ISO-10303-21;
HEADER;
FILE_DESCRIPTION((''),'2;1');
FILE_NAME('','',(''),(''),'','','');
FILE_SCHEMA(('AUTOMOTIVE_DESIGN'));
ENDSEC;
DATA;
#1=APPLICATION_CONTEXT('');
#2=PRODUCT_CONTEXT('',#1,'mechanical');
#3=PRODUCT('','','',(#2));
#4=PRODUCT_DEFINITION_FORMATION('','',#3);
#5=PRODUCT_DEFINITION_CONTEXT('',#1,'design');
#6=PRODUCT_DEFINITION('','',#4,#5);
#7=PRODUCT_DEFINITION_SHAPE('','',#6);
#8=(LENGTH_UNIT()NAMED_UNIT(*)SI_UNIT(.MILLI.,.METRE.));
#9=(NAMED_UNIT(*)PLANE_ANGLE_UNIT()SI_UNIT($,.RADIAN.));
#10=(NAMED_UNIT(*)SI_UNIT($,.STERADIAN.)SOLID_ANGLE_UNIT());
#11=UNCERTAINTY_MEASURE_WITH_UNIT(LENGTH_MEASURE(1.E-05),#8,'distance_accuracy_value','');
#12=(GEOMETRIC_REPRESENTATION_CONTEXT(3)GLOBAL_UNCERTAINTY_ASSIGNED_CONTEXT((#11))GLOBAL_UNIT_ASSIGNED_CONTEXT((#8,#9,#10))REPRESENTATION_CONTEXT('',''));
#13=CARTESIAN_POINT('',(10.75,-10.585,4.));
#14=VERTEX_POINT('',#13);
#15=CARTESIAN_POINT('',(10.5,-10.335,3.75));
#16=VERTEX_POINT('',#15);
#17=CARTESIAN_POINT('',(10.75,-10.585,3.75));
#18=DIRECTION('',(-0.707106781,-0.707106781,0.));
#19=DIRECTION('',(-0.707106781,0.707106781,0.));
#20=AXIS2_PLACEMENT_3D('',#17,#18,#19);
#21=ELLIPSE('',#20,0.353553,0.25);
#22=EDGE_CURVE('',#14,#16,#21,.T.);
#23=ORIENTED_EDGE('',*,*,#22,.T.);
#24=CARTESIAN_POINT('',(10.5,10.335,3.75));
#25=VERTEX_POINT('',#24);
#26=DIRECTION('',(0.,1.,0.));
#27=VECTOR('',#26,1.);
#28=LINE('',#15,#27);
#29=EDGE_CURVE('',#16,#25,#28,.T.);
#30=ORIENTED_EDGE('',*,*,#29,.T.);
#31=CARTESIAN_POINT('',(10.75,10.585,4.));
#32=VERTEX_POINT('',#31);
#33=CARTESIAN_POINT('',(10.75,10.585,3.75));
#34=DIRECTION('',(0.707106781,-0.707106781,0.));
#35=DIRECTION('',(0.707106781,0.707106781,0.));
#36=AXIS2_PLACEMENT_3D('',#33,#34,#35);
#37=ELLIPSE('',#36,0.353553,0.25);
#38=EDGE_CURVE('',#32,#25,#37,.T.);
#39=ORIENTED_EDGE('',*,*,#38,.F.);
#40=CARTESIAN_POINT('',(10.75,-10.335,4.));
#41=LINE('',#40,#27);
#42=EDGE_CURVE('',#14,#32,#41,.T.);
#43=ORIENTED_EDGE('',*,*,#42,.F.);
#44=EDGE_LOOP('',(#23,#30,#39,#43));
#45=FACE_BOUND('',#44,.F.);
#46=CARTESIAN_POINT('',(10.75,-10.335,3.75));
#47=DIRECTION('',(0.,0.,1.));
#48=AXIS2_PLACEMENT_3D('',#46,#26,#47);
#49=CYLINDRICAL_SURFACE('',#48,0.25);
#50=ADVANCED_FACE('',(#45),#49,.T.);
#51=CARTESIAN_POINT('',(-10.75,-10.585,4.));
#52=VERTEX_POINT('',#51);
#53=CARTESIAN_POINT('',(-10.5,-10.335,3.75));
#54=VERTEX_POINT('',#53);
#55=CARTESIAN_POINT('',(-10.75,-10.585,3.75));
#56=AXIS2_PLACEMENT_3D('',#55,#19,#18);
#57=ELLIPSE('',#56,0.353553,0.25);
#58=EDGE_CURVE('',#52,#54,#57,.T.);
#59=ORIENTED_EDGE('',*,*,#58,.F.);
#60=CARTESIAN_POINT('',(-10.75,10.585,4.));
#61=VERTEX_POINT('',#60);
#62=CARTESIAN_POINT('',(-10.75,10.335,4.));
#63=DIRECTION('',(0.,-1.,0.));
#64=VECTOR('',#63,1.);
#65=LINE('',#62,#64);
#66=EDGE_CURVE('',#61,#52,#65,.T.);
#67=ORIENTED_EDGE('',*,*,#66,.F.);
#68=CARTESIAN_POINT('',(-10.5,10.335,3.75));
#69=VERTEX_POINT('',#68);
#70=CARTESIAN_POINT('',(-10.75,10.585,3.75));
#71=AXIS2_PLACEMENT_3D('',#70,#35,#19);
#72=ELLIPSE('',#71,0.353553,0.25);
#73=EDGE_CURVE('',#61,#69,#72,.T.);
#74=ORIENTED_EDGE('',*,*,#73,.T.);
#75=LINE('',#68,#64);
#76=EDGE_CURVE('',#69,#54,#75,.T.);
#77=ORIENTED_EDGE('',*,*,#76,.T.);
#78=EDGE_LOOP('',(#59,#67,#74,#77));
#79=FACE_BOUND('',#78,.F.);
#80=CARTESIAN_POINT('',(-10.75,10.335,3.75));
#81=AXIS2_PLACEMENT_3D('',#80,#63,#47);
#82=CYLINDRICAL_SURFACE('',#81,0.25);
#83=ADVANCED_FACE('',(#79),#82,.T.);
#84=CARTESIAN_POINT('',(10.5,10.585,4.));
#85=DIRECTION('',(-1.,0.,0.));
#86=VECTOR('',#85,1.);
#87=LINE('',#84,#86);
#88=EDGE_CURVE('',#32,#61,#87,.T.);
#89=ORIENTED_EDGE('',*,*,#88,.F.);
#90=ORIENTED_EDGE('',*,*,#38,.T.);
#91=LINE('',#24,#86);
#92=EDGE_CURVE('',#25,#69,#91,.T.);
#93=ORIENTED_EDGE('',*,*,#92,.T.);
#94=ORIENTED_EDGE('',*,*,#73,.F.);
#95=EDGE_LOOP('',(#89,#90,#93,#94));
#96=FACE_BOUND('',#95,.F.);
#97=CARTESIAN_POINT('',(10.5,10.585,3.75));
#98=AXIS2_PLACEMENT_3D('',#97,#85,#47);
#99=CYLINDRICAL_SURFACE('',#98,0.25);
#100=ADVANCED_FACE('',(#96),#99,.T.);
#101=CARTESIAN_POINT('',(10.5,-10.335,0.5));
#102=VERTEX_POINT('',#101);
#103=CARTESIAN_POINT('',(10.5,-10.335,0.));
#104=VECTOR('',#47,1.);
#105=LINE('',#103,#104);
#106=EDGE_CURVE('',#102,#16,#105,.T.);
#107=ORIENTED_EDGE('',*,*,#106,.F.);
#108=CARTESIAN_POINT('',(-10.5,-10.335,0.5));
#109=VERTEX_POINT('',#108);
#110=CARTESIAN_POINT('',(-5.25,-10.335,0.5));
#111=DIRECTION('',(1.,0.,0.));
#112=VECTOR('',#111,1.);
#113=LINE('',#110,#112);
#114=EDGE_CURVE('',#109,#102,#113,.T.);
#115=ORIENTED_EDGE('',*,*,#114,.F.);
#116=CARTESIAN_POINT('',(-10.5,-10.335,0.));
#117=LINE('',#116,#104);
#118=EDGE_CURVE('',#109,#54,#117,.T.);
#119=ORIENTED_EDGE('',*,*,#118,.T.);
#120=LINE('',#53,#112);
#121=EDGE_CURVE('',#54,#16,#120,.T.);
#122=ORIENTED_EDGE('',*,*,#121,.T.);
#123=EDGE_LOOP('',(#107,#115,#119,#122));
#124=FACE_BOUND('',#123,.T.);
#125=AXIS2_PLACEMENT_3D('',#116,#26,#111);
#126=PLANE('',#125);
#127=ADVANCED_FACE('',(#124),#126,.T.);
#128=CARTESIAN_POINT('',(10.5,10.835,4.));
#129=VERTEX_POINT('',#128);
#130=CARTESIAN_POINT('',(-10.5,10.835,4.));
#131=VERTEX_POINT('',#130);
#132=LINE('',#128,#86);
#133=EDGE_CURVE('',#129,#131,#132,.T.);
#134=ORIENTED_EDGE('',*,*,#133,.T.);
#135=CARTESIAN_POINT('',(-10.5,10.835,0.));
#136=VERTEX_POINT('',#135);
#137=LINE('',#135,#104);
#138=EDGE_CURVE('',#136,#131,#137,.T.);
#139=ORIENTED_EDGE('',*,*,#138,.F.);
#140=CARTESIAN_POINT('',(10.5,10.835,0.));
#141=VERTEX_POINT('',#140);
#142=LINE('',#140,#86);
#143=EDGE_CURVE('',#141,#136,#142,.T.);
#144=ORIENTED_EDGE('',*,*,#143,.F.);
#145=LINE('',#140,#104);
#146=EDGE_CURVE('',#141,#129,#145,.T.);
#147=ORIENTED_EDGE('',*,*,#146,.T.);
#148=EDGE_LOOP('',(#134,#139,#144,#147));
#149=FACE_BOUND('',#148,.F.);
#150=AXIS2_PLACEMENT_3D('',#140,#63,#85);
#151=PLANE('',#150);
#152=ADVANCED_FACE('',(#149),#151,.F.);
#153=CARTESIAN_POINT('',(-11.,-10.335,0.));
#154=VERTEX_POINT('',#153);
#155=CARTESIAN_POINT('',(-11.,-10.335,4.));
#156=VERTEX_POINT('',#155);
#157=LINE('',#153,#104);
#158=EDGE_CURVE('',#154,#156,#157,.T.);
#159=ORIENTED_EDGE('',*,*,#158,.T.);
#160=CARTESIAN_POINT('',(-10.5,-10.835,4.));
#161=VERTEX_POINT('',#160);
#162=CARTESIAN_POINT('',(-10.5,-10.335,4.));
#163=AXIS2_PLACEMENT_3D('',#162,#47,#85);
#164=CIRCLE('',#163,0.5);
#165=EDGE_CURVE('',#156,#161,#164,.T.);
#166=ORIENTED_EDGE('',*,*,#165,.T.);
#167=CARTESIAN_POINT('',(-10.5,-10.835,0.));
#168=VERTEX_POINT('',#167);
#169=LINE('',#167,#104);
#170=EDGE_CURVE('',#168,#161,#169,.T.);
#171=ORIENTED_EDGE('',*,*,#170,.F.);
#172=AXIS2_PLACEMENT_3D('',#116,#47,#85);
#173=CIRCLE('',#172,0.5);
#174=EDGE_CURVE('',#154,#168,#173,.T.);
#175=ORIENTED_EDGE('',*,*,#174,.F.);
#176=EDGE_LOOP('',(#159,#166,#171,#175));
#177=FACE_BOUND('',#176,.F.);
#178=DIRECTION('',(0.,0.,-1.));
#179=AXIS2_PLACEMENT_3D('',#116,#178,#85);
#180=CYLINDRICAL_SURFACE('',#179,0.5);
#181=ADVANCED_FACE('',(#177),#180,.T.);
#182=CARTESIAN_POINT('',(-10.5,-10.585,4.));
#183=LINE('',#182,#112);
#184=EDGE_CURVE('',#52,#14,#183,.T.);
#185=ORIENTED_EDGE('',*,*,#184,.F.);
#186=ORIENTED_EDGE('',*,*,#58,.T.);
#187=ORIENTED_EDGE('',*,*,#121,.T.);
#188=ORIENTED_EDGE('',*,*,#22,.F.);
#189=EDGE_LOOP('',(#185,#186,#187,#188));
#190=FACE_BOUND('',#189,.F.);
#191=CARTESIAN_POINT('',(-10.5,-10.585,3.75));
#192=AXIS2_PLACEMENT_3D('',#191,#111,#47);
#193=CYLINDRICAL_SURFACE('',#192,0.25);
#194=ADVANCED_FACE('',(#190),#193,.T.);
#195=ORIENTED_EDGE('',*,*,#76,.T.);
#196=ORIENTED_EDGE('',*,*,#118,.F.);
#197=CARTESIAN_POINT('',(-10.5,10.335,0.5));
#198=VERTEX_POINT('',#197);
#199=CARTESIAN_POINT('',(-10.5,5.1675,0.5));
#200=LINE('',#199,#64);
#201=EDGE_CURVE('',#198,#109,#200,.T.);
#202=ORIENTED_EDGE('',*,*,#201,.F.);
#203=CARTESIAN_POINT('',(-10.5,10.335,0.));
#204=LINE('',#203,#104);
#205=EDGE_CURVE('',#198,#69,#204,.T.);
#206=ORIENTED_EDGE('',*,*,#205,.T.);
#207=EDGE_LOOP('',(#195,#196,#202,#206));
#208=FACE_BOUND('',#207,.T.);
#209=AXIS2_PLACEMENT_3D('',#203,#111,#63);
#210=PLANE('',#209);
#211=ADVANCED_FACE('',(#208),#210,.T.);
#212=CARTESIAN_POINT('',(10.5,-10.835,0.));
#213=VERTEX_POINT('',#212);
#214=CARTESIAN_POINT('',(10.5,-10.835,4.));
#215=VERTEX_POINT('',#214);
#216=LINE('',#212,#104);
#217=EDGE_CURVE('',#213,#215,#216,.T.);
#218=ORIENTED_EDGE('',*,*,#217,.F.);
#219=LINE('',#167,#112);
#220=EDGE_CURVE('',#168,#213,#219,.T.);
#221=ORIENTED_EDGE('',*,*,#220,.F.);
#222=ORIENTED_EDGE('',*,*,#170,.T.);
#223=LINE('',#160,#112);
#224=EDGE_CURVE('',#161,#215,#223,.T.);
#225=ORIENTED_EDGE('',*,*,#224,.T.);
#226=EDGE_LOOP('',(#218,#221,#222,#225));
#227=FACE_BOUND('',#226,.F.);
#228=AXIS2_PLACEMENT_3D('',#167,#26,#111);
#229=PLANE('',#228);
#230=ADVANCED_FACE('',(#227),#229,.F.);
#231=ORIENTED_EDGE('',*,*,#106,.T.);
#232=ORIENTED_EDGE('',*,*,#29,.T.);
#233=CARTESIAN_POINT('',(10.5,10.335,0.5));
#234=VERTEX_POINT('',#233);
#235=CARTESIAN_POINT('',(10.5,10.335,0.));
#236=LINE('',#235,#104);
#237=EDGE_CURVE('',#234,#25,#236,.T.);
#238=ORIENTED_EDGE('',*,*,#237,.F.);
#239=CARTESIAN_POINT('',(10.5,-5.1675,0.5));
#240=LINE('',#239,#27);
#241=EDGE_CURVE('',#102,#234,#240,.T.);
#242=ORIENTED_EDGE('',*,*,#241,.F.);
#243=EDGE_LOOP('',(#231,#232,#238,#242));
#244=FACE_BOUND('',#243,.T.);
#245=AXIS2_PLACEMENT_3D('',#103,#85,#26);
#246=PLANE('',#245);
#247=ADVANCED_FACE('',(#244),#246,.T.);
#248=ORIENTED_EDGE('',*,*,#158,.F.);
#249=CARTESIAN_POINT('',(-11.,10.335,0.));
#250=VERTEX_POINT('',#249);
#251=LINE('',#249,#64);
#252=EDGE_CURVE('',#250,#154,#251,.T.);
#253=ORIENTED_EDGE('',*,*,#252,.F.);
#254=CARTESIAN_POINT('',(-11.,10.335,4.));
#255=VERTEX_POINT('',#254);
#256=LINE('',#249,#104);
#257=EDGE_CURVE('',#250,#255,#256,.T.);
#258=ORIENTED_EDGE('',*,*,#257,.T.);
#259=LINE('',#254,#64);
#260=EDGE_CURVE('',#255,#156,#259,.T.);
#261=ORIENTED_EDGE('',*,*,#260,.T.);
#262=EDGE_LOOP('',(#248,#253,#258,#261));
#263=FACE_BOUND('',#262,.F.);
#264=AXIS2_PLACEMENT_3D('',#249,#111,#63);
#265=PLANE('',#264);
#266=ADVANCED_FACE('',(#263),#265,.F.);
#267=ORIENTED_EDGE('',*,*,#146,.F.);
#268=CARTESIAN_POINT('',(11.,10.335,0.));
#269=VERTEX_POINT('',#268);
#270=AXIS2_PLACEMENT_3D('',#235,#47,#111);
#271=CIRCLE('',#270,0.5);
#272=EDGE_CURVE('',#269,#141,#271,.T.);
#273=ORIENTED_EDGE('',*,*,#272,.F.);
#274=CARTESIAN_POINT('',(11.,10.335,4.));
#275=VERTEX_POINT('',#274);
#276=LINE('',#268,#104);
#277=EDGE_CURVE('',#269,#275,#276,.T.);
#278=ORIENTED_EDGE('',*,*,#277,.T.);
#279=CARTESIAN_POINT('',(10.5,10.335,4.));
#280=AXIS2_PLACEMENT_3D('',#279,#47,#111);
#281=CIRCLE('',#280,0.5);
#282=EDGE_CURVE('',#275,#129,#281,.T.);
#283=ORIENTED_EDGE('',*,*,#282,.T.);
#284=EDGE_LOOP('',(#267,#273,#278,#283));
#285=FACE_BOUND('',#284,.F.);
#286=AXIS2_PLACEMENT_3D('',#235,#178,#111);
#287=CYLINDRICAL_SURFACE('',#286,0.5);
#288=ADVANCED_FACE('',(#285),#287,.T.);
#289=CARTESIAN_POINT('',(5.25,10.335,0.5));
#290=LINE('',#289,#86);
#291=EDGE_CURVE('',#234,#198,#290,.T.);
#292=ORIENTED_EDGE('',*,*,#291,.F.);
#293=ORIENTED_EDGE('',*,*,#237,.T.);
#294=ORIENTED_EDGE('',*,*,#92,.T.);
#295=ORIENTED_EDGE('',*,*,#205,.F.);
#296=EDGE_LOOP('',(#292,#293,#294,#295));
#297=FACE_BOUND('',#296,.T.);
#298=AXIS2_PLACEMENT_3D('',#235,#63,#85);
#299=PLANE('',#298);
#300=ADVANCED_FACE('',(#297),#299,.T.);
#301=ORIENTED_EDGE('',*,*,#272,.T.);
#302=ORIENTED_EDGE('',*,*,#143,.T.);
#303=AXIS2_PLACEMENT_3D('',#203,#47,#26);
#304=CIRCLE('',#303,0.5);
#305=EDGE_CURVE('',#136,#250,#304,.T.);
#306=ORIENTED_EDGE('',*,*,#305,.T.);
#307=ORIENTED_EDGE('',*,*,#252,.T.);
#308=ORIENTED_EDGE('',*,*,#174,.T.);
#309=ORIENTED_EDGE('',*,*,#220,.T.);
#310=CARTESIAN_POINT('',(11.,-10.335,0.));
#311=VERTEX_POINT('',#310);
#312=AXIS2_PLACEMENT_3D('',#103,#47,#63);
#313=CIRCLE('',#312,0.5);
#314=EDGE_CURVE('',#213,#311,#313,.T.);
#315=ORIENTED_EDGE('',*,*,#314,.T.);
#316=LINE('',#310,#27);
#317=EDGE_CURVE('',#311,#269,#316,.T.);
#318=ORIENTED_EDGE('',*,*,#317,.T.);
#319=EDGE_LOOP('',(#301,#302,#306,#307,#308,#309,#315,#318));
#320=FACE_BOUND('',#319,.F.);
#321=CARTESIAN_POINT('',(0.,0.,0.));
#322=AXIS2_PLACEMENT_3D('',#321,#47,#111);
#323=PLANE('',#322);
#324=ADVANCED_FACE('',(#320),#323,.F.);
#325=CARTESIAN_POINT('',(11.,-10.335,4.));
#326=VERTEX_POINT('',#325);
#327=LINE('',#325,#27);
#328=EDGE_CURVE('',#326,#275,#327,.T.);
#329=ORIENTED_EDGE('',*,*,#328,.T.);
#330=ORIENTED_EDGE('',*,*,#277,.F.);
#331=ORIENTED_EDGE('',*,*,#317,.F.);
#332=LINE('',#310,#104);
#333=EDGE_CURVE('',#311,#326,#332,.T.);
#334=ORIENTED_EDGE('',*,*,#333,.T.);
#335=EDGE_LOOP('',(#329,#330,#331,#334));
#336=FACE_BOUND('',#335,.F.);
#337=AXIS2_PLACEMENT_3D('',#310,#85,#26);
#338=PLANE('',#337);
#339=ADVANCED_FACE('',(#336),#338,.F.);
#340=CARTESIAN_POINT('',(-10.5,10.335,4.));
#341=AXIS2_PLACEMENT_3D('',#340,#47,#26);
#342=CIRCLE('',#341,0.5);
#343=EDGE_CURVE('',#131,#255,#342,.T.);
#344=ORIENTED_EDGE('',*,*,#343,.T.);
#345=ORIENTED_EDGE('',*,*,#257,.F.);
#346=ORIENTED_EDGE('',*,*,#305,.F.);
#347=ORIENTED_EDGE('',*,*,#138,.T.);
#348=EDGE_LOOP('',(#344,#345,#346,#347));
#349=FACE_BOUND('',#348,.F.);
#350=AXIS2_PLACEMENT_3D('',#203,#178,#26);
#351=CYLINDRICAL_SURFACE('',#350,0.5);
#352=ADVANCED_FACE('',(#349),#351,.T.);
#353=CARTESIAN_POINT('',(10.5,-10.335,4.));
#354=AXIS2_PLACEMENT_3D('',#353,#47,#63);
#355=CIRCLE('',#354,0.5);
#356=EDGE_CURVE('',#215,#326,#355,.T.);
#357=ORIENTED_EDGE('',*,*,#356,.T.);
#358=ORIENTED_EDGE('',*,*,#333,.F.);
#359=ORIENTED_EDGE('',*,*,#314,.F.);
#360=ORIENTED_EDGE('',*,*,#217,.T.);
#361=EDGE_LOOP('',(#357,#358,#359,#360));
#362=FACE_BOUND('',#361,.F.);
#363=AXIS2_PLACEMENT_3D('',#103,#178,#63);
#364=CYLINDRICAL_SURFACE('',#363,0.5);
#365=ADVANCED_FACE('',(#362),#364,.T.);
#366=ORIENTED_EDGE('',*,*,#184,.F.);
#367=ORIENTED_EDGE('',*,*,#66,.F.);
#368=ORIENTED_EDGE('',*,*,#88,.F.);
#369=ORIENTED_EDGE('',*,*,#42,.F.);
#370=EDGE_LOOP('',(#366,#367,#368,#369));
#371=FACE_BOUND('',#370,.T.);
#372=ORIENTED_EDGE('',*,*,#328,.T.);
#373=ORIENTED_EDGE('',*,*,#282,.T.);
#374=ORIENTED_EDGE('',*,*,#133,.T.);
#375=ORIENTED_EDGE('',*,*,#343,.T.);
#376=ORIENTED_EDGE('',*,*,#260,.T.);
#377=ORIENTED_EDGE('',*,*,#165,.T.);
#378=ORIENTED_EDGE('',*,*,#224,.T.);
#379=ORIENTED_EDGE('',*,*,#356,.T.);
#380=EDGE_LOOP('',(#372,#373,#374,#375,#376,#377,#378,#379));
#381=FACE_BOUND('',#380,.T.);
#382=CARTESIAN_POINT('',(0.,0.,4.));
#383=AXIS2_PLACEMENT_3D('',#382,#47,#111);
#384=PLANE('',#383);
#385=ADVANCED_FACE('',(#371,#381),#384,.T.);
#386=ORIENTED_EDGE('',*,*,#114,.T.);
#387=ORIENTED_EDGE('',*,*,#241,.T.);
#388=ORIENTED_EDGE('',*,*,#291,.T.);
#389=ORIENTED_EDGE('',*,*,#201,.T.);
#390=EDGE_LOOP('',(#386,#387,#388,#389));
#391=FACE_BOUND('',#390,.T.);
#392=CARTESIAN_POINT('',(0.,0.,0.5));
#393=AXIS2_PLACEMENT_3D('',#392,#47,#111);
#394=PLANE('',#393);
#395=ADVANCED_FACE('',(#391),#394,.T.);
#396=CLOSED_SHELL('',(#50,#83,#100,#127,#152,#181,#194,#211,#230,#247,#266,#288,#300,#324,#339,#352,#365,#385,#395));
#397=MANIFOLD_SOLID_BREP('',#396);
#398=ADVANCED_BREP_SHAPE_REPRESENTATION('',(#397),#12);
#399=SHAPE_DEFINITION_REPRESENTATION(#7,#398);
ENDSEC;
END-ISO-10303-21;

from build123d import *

# Parameters (mm, degrees)
F1_DEPTH = 4
F2_T     = 0.5
F3_R     = 0.25


# Not quite as in the source:
# - a shell that OpenCascade refuses in one call is made with other operations: the cavity is built on its own and cut out


with BuildPart() as f1:
    # F0 (on Top) → F1 (new body)
    with BuildSketch(Plane.XY):
        with BuildLine():
            Line((10.5, 10.835), (-10.5, 10.835))
            ThreePointArc((-10.5, 10.835), (-10.8535533906, 10.6885533906), (-11, 10.335))
            Line((-11, 10.335), (-11, -10.335))
            ThreePointArc((-11, -10.335), (-10.8535533906, -10.6885533906), (-10.5, -10.835))
            Line((-10.5, -10.835), (10.5, -10.835))
            ThreePointArc((10.5, -10.835), (10.8535533906, -10.6885533906), (11, -10.335))
            Line((11, -10.335), (11, 10.335))
            ThreePointArc((11, 10.335), (10.8535533906, 10.6885533906), (10.5, 10.835))
        make_face()
    extrude(amount=F1_DEPTH)

    # F2: shell of thickness 0.5, made by hand


with BuildPart() as f2_core1:
    # F2_t2: copy of F1
    add(f1.part)

    # the walls: a layer under each face that stays
    f2_faces = [f2_core1.faces().sort_by_distance(p)[0] for p in [
        (0, 10.835, 2),
        (-11, 0, 2),
        (0, -10.835, 2),
        (11, 0, 2),
        (0, 0, 0),
    ]]
    thicken(f2_faces, amount=-F2_T, mode=Mode.SUBTRACT)


with BuildPart() as f1_1:
    add(f1.part)

    # what is left inside the walls is the cavity
    f2_cavity = [f2_core1.part.solids().sort_by_distance(p)[0] for p in [
        (0, -3.445, 0.505),
    ]]
    add(f2_cavity, mode=Mode.SUBTRACT)

    # F3
    f3_edges = [f1_1.edges().sort_by_distance(p)[0] for p in [
        (10.5, 0, 4),
        (0, 10.335, 4),
        (-10.5, 0, 4),
        (0, -10.335, 4),
    ]]
    fillet(f3_edges, radius=F3_R)


solid = f1_1.part
